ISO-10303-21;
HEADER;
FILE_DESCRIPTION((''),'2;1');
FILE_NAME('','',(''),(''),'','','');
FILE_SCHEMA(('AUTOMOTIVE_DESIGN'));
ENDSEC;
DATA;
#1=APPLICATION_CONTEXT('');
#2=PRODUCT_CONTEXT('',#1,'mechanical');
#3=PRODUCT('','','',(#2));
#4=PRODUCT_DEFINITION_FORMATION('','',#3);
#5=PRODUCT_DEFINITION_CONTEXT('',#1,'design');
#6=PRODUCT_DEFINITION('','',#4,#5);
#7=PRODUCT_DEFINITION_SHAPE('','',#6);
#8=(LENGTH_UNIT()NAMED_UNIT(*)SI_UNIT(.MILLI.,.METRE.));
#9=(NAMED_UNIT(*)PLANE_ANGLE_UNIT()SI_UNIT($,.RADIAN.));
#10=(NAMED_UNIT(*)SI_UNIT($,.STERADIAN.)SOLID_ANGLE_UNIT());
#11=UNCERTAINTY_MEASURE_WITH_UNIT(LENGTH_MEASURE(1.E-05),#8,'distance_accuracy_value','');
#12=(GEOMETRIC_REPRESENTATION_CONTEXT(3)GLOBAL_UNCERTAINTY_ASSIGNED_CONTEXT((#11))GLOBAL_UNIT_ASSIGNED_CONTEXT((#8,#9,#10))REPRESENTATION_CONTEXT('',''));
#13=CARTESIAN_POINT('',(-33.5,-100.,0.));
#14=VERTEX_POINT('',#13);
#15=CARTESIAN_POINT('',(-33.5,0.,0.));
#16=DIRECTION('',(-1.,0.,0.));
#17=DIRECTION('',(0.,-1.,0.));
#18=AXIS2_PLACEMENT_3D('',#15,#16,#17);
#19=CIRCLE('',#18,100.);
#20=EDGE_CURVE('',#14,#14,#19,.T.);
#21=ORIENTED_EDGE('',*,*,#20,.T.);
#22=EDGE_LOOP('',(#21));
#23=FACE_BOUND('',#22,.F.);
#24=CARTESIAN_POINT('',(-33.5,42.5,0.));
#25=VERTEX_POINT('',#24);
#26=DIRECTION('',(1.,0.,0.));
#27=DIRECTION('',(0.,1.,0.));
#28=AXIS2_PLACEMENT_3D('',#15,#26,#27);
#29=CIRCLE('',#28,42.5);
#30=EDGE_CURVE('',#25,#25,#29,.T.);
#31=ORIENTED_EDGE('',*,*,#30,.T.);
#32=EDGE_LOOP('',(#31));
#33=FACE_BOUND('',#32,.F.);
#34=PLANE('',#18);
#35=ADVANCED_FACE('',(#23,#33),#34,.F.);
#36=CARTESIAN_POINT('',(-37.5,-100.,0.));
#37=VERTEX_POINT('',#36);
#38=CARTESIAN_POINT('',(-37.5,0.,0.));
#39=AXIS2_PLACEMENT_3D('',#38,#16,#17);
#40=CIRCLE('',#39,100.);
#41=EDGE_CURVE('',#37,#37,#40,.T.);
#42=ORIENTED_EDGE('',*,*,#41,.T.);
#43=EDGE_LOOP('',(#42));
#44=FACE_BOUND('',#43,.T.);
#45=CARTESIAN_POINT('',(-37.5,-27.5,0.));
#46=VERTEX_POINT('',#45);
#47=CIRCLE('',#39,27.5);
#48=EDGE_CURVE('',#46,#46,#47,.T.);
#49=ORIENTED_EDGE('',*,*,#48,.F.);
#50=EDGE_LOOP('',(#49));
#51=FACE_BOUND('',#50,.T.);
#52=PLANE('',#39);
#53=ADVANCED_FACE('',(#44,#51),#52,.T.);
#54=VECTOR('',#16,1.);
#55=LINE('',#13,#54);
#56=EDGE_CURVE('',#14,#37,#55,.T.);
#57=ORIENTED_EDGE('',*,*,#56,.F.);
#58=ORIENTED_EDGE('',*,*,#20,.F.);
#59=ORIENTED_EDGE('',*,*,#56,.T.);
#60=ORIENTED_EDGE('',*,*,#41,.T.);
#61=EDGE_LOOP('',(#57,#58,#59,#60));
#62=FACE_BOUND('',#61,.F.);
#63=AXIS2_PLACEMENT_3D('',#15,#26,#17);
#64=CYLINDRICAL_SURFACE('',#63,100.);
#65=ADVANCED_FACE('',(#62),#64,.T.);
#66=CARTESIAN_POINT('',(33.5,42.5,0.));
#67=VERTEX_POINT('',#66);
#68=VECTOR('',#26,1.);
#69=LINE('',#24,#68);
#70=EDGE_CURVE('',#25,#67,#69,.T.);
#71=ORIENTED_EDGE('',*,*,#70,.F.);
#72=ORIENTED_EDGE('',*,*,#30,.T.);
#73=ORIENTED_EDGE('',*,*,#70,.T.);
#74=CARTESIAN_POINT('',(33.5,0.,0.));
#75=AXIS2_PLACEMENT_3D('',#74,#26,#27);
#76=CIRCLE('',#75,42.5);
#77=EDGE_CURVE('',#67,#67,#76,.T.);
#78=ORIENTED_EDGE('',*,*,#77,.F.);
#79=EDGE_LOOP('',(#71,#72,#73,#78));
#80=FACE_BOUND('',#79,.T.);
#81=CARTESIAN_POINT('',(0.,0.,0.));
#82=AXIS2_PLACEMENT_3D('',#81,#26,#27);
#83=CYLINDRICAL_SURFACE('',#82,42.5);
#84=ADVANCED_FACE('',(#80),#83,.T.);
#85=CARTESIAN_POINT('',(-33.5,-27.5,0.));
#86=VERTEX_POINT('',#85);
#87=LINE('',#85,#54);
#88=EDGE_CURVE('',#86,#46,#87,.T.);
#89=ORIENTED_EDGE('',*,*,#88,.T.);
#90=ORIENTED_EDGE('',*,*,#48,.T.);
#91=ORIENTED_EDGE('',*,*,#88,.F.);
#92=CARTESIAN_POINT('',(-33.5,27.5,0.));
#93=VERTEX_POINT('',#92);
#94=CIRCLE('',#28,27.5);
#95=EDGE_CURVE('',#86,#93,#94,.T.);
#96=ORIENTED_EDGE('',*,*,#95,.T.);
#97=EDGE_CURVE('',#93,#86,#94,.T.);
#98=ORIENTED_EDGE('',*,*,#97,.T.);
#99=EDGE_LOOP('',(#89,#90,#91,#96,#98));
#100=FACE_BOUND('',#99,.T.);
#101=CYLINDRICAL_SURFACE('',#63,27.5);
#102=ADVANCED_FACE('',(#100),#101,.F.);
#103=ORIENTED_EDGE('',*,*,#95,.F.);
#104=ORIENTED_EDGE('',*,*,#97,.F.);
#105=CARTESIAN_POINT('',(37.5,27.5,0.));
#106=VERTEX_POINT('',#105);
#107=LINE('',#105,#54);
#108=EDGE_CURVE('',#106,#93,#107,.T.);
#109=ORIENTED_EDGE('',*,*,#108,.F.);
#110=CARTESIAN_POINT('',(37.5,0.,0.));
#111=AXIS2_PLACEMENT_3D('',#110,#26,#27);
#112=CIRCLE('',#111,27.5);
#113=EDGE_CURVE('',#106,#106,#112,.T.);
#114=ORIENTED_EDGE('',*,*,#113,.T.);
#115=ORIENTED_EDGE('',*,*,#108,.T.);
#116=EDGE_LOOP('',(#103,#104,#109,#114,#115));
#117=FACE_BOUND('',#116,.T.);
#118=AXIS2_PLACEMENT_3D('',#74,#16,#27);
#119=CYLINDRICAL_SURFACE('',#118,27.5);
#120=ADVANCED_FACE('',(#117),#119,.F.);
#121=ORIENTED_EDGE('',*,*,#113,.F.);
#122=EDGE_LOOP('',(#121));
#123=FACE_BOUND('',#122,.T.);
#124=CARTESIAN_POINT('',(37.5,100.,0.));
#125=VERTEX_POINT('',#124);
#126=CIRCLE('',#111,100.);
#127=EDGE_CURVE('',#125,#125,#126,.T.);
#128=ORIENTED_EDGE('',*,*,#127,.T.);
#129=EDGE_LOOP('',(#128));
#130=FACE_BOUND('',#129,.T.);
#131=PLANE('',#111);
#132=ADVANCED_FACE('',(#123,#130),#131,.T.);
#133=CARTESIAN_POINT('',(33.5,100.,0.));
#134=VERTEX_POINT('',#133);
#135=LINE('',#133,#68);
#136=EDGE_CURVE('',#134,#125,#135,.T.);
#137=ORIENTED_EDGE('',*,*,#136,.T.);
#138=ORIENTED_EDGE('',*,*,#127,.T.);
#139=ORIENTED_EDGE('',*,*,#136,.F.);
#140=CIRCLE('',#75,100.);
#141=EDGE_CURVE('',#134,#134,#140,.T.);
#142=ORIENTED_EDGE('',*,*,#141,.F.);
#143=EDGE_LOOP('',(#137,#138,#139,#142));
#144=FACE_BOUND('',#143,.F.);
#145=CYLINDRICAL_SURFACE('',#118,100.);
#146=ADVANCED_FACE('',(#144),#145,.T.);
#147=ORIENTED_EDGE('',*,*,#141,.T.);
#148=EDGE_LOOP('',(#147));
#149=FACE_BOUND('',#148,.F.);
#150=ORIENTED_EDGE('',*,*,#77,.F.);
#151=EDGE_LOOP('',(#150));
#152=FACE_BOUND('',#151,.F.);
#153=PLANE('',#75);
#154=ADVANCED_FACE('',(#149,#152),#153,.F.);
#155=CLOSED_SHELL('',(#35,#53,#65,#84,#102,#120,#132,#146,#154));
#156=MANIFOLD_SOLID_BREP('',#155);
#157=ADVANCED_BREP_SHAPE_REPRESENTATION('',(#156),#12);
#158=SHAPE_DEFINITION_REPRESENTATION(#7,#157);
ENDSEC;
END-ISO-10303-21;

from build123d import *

# Parameters (mm, degrees)
F0_R     = 42.5
F0_R_2   = 27.5
F1_DEPTH = 33.5
F2_R     = 100
F2_R_2   = 42.5
F2_R_3   = 27.5
F3_DEPTH = 4
F4_R     = 100
F4_R_2   = 42.5
F4_R_3   = 27.5
F5_DEPTH = 4


# Not quite as in the source:
# - a feature names something its author has since deleted; it is built from what else it names


with BuildPart() as f1:
    # F0 (on Right) → F1 (new body, symmetric)
    with BuildSketch(Plane.YZ):
        Circle(F0_R)
        Circle(F0_R_2, mode=Mode.SUBTRACT)
    extrude(amount=F1_DEPTH, both=True)

    # F2 (on face) → F3 (join)
    with BuildSketch(Plane.YZ.offset(33.5)):
        Circle(F2_R)
        Circle(F2_R_2, mode=Mode.SUBTRACT)
        Circle(F2_R_2)
        Circle(F2_R_3, mode=Mode.SUBTRACT)
    extrude(amount=F3_DEPTH)

    # F4 (on face) → F5 (join)
    with BuildSketch(Plane(origin=(-33.5, 0, 0), x_dir=(0, -1, 0), z_dir=(-1, 0, 0))):
        Circle(F4_R)
        Circle(F4_R_2, mode=Mode.SUBTRACT)
        Circle(F4_R_2)
        Circle(F4_R_3, mode=Mode.SUBTRACT)
    extrude(amount=F5_DEPTH)


solid = f1.part
